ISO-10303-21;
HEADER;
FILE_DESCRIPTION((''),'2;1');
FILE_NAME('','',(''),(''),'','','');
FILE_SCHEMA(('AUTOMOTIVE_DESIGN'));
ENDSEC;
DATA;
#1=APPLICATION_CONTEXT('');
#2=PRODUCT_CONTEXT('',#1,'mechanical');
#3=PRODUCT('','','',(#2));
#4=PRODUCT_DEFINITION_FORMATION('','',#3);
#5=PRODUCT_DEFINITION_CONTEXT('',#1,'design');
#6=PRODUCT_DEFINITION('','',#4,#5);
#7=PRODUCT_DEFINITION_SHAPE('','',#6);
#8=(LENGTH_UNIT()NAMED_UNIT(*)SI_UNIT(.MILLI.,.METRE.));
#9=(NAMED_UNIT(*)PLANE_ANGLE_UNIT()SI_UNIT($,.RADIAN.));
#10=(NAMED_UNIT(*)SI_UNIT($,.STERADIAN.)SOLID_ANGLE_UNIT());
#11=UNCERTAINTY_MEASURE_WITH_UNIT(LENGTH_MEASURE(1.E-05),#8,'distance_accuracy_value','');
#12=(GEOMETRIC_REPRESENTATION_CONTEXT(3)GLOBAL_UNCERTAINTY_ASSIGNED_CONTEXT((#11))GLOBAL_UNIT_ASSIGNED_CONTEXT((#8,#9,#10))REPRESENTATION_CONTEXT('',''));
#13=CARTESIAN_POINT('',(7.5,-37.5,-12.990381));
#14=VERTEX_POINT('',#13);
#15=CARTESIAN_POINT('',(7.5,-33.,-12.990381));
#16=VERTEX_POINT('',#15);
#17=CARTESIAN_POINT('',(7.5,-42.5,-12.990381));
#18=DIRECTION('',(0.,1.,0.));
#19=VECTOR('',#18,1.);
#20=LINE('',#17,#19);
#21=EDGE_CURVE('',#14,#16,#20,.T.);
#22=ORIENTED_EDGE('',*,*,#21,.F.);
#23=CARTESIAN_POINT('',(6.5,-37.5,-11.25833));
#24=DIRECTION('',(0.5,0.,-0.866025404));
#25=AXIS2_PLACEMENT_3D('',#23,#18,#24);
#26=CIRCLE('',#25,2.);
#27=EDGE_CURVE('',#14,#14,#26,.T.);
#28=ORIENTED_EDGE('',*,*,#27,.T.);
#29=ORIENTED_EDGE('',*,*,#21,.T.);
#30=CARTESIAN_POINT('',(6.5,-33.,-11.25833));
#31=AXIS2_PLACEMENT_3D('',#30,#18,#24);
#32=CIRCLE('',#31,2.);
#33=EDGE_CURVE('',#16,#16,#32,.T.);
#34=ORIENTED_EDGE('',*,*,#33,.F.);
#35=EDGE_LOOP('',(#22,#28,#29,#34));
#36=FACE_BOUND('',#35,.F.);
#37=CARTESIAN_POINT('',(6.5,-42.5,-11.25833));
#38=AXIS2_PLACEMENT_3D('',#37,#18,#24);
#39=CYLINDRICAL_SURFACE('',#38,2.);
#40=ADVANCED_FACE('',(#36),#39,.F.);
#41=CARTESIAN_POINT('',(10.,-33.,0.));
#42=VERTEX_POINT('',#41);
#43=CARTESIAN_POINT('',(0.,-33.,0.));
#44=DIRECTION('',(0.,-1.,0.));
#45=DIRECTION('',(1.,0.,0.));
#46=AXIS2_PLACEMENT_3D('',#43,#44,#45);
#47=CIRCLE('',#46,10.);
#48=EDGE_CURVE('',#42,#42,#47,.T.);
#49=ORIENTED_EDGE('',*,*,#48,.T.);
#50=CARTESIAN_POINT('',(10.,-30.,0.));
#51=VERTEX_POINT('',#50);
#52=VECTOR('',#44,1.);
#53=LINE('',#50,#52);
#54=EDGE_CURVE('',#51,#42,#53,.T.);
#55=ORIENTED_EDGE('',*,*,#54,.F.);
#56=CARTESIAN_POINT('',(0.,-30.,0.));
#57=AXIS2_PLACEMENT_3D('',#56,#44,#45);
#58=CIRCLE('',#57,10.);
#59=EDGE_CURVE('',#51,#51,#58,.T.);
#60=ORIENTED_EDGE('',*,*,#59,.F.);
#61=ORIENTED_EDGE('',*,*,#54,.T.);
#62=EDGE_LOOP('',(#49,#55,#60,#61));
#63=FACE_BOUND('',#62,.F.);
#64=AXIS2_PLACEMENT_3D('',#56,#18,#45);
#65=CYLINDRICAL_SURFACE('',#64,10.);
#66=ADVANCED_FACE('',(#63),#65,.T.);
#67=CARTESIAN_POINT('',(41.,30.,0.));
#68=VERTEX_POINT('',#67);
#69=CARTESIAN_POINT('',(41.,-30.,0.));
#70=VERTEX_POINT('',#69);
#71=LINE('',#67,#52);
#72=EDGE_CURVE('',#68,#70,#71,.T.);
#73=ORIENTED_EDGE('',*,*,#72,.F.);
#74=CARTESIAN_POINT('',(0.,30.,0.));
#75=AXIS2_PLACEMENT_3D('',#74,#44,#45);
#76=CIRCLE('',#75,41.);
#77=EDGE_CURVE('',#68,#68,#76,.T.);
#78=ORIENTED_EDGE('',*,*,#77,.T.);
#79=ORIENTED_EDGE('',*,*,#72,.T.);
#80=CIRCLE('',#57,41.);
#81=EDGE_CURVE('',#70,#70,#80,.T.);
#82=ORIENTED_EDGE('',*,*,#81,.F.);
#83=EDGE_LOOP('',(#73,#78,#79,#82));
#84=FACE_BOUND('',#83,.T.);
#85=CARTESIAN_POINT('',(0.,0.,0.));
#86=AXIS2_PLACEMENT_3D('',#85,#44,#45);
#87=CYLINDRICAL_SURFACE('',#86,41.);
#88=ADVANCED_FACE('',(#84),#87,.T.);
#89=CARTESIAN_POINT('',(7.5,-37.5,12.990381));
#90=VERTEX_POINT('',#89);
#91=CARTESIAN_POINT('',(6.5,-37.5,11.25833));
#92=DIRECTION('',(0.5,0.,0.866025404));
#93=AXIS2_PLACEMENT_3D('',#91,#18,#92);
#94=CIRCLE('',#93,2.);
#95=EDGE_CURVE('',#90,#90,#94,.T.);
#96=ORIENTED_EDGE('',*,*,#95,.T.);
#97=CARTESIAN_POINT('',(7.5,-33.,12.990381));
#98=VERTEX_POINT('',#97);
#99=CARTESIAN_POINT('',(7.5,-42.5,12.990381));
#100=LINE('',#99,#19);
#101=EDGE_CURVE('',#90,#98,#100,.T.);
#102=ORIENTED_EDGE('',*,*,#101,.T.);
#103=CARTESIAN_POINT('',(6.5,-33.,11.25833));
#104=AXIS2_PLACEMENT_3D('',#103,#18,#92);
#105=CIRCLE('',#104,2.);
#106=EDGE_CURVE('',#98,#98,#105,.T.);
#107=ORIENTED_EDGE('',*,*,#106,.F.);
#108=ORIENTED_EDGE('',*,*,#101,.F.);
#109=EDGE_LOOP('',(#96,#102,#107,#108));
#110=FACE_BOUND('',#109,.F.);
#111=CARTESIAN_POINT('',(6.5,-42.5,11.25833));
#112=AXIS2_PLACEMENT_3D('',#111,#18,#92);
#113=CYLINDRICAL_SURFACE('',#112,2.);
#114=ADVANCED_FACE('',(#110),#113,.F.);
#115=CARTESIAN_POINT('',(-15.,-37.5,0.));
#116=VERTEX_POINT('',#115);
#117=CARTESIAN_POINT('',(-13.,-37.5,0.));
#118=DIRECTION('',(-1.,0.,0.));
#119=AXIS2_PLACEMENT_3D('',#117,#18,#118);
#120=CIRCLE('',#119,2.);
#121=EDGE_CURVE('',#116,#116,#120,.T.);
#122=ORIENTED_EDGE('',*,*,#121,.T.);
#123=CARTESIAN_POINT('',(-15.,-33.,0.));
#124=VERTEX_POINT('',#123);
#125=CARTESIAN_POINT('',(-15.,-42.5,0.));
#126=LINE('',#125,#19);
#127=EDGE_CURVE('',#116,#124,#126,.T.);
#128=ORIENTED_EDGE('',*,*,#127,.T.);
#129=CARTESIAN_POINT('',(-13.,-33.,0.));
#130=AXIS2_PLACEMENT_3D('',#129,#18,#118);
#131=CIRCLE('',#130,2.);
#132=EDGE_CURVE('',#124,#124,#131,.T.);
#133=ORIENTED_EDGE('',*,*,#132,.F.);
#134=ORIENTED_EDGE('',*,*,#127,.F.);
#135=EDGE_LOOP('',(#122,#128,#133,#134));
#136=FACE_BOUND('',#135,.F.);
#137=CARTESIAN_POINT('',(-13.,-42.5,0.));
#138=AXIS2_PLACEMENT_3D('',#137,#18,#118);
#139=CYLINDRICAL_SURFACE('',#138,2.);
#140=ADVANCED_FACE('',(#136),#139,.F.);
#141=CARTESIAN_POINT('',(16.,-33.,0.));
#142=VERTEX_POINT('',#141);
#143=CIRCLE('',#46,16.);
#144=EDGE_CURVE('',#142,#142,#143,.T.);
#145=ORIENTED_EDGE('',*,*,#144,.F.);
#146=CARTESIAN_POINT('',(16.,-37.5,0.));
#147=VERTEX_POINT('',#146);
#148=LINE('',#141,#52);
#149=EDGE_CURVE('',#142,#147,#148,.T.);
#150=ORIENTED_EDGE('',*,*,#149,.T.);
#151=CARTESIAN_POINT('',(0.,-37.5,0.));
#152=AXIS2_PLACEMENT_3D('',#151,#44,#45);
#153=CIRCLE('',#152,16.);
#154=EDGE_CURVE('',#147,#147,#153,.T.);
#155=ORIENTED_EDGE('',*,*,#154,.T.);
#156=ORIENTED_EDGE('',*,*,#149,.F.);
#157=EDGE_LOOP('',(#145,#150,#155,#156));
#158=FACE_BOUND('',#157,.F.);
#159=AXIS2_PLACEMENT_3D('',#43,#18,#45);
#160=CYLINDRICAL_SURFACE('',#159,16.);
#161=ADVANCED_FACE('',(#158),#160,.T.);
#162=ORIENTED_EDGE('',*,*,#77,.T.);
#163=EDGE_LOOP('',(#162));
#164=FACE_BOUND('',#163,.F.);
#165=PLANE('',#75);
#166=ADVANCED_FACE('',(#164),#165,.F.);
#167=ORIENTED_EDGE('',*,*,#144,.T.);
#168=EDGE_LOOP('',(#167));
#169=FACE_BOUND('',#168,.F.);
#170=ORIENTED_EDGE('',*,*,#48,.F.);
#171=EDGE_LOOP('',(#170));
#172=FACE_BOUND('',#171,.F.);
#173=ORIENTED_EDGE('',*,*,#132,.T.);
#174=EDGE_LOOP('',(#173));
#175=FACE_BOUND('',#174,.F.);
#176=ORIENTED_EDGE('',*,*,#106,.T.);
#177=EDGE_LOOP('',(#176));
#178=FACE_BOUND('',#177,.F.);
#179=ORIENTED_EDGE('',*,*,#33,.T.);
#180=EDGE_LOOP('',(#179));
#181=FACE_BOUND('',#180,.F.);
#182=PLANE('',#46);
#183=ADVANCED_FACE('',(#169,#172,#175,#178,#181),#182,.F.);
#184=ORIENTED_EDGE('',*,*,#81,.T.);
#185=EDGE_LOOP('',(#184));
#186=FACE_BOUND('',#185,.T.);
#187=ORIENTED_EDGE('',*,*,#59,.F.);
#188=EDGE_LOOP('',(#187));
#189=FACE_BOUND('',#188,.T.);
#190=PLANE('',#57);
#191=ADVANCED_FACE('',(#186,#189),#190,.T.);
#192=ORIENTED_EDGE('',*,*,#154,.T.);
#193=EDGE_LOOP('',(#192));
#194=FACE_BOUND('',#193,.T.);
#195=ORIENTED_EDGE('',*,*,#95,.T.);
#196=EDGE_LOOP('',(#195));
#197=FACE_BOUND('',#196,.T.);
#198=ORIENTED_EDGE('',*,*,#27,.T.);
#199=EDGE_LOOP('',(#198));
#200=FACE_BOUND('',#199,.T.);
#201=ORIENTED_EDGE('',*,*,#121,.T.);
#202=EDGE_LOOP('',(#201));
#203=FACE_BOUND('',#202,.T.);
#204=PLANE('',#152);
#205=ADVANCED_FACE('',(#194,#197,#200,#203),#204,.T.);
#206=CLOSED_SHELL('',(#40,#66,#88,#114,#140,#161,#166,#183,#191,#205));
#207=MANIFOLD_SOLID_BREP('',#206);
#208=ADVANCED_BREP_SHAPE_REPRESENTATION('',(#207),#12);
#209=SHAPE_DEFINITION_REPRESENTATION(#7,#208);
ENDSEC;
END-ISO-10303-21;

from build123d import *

# Parameters (mm, degrees)
F0_R            = 41
F1_DEPTH        = 30
F1_DEPTH_BACK   = 30
F2_R            = 10
F3_DEPTH        = 3
F4_R            = 16
F5_DEPTH        = 4.5
F7_D            = 4
F7_DEPTH        = 5
F7_TIP          = 1.2017212381
F7_COPIES_COUNT = 3


# Not quite as in the source:
# - a pattern or mirror of a feature is missing from the dataset's text; its kind, count and spacing are read off the source's solid


with BuildPart() as f1:
    # F0 (on Front) → F1 (new body, two sides)
    with BuildSketch(Plane.XZ) as f1_sk:
        Circle(F0_R)
    extrude(amount=F1_DEPTH)
    extrude(f1_sk.sketch, amount=-F1_DEPTH_BACK)

    # F2 (on face) → F3 (join)
    with BuildSketch(Plane.XZ.offset(30)):
        Circle(F2_R)
    extrude(amount=F3_DEPTH)

    # F4 (on face) → F5 (join)
    with BuildSketch(Plane.XZ.offset(33)):
        Circle(F4_R)
    extrude(amount=F5_DEPTH)

    # F7
    with Locations(Plane.XZ.offset(37.5)):
        with Locations((-13, 0)):
            f7 = Hole(F7_D / 2, depth=F7_DEPTH)
            with Locations((0, 0, -(F7_DEPTH + F7_TIP / 2))):  # 118° drill point
                Cone(0, F7_D / 2, F7_TIP, mode=Mode.SUBTRACT)

    # F7_copies: F7 ×3 about axis
    f7_copies_axis = Axis((0, 0, 0), (0, 1, 0))
    for i in range(1, F7_COPIES_COUNT):
        add(f7.rotate(f7_copies_axis, i * 360 / F7_COPIES_COUNT), mode=Mode.SUBTRACT)


solid = f1.part
